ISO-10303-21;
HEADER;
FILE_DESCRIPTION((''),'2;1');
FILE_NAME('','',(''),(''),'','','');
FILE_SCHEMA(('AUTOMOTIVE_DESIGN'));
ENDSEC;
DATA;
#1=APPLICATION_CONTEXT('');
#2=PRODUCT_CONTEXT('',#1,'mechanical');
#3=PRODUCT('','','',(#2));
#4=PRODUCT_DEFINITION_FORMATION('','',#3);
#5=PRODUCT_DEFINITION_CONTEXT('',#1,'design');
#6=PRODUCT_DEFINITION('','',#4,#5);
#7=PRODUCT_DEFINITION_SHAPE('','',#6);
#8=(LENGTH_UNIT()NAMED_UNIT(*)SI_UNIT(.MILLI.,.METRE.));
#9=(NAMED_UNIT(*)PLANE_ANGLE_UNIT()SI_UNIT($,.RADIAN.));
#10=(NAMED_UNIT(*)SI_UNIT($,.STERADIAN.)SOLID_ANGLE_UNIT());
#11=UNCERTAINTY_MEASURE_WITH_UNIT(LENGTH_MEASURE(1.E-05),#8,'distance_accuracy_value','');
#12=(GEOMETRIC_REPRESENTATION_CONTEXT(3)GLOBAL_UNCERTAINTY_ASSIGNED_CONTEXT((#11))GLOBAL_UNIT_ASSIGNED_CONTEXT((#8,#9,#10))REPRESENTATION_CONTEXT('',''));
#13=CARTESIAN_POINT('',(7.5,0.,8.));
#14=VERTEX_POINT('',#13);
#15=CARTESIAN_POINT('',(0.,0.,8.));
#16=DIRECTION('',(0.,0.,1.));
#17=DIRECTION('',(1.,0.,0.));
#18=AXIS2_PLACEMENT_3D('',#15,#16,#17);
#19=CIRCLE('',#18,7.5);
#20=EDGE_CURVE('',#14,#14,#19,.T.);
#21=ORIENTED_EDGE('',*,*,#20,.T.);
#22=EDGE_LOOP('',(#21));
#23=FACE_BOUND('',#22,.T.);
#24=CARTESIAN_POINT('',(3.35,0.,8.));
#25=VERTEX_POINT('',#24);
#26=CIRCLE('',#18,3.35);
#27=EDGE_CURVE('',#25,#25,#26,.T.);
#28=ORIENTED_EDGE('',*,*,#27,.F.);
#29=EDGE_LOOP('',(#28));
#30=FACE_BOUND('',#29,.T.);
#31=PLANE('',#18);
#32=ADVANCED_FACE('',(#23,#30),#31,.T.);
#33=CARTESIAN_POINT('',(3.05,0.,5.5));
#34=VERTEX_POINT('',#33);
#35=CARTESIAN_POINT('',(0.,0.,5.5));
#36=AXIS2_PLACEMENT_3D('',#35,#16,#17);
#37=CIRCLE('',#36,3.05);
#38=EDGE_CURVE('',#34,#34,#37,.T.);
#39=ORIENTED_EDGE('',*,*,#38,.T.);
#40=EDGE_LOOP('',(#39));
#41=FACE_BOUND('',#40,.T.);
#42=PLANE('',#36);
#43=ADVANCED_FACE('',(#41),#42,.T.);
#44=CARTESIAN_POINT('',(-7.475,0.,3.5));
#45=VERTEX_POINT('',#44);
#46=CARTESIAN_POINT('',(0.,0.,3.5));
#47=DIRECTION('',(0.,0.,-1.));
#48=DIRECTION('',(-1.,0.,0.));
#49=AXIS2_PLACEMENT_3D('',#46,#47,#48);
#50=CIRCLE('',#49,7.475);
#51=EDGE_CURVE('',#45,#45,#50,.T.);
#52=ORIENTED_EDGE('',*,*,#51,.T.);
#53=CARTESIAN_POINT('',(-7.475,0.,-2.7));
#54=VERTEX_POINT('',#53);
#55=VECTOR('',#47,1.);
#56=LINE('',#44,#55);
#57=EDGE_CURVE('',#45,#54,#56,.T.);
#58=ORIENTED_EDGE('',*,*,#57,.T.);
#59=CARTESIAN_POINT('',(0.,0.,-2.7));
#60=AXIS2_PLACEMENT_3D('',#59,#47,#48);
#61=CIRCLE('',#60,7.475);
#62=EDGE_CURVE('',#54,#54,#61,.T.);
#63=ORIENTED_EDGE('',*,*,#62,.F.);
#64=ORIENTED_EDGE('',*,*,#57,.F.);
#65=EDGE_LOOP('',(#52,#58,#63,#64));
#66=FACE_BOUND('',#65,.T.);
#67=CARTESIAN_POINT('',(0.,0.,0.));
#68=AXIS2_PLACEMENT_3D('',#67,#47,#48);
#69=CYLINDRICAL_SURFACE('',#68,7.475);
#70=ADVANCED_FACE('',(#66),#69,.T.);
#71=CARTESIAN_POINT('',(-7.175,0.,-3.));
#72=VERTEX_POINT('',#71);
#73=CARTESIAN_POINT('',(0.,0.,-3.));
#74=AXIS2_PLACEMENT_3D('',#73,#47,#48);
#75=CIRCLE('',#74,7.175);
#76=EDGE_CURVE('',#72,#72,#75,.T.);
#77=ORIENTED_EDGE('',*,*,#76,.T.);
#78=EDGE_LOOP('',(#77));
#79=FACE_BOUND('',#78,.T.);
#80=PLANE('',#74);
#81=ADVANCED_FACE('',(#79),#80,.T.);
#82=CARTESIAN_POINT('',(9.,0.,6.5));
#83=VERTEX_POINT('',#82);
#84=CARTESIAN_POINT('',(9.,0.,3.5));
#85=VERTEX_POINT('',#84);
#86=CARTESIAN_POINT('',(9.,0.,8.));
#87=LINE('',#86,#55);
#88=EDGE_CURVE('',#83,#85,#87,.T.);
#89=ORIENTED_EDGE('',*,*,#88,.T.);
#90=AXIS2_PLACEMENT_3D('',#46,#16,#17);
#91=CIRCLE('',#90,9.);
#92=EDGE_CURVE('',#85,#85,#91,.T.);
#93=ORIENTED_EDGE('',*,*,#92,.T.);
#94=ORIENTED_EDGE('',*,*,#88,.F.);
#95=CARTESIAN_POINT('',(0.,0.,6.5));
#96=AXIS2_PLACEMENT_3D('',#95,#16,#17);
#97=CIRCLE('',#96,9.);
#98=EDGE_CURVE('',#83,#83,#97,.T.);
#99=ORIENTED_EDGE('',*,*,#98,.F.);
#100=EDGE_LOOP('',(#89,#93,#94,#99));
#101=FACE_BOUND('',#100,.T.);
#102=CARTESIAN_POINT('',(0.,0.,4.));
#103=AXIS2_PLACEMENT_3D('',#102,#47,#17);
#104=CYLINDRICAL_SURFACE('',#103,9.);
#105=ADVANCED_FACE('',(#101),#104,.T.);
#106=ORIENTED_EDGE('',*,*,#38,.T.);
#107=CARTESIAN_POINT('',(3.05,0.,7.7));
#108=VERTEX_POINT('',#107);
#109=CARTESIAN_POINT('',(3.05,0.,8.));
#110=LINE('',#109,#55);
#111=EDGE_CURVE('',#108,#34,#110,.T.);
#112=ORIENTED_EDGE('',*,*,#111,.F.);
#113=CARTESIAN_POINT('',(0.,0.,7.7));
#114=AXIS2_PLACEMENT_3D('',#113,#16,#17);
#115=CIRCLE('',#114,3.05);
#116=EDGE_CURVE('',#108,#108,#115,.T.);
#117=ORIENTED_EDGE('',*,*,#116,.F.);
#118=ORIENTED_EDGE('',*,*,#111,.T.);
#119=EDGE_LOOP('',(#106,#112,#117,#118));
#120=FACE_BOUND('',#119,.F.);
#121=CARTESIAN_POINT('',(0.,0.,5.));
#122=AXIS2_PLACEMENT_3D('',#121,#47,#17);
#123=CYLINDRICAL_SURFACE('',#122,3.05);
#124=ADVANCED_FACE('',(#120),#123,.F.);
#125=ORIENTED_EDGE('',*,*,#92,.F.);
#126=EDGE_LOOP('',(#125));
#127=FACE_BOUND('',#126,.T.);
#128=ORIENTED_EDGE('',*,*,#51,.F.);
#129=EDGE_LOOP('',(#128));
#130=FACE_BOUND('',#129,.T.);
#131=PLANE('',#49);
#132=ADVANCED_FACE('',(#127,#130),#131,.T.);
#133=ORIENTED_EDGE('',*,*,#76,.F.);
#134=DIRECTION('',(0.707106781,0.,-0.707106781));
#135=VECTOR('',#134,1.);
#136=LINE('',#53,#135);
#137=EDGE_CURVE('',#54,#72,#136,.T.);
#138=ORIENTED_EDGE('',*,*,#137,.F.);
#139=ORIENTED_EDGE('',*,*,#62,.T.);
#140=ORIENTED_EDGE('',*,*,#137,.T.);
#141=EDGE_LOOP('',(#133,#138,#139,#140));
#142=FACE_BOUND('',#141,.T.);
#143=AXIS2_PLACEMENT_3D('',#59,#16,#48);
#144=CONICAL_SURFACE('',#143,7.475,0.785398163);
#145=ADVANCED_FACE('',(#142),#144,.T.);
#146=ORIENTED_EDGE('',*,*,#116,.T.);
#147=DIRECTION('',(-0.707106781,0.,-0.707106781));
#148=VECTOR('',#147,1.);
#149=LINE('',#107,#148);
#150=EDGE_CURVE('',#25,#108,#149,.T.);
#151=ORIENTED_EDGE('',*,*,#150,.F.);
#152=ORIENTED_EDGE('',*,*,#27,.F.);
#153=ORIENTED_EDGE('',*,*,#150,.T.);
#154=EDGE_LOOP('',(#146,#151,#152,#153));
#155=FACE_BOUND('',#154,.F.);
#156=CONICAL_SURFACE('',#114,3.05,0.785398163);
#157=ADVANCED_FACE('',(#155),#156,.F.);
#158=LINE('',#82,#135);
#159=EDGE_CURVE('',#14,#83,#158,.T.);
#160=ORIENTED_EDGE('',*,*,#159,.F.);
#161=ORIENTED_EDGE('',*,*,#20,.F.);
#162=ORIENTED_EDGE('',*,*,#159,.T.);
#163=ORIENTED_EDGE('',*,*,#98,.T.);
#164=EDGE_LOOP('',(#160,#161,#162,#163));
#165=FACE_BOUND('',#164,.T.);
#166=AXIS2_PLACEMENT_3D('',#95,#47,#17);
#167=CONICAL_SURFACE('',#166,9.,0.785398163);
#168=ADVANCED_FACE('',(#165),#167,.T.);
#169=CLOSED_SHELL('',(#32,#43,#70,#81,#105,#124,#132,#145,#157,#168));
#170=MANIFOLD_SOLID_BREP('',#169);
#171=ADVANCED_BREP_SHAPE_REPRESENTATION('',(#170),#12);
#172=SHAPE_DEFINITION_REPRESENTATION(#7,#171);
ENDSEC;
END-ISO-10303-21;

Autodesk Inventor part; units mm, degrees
ref_plane "YZ Plane" through (0, 0, 0) normal (1, 0, 0) x (0, 1, 0)
ref_plane "XZ Plane" through (0, 0, 0) normal (0, 1, 0) x (-1, 0, 0)
ref_plane "XY Plane" through (0, 0, 0) normal (0, 0, 1) x (1, 0, 0)
sketch "Sketch1" plane through (0, 0, 0) normal (0, 0, 1) x (1, 0, 0)
  circle A0 centre (0, 0) radius 9
  dimension "d0" = 18
extrude "Extrusion1" add sketch "Sketch1" along normal blind 4
sketch "Sketch3" plane through (0, 0, 4) normal (0, 0, 1) x (1, 0, 0)
  circle A0 centre (0, 0) radius 3.05
  dimension "d5" = 6.1
extrude "Extrusion3" cut sketch "Sketch3" against normal blind 2.5
sketch "Sketch4" plane through (0, 0, 0) normal (0, 0, -1) x (-1, 0, 0)
  circle A0 centre (0, 0) radius 9 projected
  circle A1 centre (0, 0) radius 7.475
  dimension "d8" = 14.95
extrude "Extrusion4" cut sketch "Sketch4" against normal blind 3.5
sketch "Sketch5" plane through (0, 0, 4) normal (0, 0, 1) x (1, 0, 0)
  circle A0 centre (0, 0) radius 3.05 projected
  circle A1 centre (0, 0) radius 9 projected
extrude "Extrusion5" add sketch "Sketch5" along normal blind 1
sketch "Sketch6" plane through (0, 0, 5) normal (0, 0, 1) x (1, 0, 0)
  circle A0 centre (0, 0) radius 7.475 projected
  circle A1 centre (0, 0) radius 9 projected
  circle A2 centre (0, 0) radius 3.05 projected
extrude "Extrusion6" add sketch "Sketch6" along normal blind 3 contours A0 | A1
sketch "Sketch7" plane through (0, 0, 0) normal (0, 0, -1) x (-1, 0, 0)
  circle A0 centre (0, 0) radius 7.475 projected
extrude "Extrusion7" add sketch "Sketch7" along normal blind 3
sketch "Sketch8" plane through (0, 0, 1.5) normal (0, 0, 1) x (1, 0, 0)
  circle A0 centre (0, 0) radius 3.05 projected
extrude "Extrusion8" add sketch "Sketch8" along normal blind 4
chamfer "Chamfer4" distance 1.5 angle 45 1 edges at (-9, 0, 8)
chamfer "Chamfer5" distance 0.3 angle 45 2 edges at (7.475, 0, -3) (-3.05, 0, 8)
properties part number "encoder_magnet_holder" material "PET Plastic"
